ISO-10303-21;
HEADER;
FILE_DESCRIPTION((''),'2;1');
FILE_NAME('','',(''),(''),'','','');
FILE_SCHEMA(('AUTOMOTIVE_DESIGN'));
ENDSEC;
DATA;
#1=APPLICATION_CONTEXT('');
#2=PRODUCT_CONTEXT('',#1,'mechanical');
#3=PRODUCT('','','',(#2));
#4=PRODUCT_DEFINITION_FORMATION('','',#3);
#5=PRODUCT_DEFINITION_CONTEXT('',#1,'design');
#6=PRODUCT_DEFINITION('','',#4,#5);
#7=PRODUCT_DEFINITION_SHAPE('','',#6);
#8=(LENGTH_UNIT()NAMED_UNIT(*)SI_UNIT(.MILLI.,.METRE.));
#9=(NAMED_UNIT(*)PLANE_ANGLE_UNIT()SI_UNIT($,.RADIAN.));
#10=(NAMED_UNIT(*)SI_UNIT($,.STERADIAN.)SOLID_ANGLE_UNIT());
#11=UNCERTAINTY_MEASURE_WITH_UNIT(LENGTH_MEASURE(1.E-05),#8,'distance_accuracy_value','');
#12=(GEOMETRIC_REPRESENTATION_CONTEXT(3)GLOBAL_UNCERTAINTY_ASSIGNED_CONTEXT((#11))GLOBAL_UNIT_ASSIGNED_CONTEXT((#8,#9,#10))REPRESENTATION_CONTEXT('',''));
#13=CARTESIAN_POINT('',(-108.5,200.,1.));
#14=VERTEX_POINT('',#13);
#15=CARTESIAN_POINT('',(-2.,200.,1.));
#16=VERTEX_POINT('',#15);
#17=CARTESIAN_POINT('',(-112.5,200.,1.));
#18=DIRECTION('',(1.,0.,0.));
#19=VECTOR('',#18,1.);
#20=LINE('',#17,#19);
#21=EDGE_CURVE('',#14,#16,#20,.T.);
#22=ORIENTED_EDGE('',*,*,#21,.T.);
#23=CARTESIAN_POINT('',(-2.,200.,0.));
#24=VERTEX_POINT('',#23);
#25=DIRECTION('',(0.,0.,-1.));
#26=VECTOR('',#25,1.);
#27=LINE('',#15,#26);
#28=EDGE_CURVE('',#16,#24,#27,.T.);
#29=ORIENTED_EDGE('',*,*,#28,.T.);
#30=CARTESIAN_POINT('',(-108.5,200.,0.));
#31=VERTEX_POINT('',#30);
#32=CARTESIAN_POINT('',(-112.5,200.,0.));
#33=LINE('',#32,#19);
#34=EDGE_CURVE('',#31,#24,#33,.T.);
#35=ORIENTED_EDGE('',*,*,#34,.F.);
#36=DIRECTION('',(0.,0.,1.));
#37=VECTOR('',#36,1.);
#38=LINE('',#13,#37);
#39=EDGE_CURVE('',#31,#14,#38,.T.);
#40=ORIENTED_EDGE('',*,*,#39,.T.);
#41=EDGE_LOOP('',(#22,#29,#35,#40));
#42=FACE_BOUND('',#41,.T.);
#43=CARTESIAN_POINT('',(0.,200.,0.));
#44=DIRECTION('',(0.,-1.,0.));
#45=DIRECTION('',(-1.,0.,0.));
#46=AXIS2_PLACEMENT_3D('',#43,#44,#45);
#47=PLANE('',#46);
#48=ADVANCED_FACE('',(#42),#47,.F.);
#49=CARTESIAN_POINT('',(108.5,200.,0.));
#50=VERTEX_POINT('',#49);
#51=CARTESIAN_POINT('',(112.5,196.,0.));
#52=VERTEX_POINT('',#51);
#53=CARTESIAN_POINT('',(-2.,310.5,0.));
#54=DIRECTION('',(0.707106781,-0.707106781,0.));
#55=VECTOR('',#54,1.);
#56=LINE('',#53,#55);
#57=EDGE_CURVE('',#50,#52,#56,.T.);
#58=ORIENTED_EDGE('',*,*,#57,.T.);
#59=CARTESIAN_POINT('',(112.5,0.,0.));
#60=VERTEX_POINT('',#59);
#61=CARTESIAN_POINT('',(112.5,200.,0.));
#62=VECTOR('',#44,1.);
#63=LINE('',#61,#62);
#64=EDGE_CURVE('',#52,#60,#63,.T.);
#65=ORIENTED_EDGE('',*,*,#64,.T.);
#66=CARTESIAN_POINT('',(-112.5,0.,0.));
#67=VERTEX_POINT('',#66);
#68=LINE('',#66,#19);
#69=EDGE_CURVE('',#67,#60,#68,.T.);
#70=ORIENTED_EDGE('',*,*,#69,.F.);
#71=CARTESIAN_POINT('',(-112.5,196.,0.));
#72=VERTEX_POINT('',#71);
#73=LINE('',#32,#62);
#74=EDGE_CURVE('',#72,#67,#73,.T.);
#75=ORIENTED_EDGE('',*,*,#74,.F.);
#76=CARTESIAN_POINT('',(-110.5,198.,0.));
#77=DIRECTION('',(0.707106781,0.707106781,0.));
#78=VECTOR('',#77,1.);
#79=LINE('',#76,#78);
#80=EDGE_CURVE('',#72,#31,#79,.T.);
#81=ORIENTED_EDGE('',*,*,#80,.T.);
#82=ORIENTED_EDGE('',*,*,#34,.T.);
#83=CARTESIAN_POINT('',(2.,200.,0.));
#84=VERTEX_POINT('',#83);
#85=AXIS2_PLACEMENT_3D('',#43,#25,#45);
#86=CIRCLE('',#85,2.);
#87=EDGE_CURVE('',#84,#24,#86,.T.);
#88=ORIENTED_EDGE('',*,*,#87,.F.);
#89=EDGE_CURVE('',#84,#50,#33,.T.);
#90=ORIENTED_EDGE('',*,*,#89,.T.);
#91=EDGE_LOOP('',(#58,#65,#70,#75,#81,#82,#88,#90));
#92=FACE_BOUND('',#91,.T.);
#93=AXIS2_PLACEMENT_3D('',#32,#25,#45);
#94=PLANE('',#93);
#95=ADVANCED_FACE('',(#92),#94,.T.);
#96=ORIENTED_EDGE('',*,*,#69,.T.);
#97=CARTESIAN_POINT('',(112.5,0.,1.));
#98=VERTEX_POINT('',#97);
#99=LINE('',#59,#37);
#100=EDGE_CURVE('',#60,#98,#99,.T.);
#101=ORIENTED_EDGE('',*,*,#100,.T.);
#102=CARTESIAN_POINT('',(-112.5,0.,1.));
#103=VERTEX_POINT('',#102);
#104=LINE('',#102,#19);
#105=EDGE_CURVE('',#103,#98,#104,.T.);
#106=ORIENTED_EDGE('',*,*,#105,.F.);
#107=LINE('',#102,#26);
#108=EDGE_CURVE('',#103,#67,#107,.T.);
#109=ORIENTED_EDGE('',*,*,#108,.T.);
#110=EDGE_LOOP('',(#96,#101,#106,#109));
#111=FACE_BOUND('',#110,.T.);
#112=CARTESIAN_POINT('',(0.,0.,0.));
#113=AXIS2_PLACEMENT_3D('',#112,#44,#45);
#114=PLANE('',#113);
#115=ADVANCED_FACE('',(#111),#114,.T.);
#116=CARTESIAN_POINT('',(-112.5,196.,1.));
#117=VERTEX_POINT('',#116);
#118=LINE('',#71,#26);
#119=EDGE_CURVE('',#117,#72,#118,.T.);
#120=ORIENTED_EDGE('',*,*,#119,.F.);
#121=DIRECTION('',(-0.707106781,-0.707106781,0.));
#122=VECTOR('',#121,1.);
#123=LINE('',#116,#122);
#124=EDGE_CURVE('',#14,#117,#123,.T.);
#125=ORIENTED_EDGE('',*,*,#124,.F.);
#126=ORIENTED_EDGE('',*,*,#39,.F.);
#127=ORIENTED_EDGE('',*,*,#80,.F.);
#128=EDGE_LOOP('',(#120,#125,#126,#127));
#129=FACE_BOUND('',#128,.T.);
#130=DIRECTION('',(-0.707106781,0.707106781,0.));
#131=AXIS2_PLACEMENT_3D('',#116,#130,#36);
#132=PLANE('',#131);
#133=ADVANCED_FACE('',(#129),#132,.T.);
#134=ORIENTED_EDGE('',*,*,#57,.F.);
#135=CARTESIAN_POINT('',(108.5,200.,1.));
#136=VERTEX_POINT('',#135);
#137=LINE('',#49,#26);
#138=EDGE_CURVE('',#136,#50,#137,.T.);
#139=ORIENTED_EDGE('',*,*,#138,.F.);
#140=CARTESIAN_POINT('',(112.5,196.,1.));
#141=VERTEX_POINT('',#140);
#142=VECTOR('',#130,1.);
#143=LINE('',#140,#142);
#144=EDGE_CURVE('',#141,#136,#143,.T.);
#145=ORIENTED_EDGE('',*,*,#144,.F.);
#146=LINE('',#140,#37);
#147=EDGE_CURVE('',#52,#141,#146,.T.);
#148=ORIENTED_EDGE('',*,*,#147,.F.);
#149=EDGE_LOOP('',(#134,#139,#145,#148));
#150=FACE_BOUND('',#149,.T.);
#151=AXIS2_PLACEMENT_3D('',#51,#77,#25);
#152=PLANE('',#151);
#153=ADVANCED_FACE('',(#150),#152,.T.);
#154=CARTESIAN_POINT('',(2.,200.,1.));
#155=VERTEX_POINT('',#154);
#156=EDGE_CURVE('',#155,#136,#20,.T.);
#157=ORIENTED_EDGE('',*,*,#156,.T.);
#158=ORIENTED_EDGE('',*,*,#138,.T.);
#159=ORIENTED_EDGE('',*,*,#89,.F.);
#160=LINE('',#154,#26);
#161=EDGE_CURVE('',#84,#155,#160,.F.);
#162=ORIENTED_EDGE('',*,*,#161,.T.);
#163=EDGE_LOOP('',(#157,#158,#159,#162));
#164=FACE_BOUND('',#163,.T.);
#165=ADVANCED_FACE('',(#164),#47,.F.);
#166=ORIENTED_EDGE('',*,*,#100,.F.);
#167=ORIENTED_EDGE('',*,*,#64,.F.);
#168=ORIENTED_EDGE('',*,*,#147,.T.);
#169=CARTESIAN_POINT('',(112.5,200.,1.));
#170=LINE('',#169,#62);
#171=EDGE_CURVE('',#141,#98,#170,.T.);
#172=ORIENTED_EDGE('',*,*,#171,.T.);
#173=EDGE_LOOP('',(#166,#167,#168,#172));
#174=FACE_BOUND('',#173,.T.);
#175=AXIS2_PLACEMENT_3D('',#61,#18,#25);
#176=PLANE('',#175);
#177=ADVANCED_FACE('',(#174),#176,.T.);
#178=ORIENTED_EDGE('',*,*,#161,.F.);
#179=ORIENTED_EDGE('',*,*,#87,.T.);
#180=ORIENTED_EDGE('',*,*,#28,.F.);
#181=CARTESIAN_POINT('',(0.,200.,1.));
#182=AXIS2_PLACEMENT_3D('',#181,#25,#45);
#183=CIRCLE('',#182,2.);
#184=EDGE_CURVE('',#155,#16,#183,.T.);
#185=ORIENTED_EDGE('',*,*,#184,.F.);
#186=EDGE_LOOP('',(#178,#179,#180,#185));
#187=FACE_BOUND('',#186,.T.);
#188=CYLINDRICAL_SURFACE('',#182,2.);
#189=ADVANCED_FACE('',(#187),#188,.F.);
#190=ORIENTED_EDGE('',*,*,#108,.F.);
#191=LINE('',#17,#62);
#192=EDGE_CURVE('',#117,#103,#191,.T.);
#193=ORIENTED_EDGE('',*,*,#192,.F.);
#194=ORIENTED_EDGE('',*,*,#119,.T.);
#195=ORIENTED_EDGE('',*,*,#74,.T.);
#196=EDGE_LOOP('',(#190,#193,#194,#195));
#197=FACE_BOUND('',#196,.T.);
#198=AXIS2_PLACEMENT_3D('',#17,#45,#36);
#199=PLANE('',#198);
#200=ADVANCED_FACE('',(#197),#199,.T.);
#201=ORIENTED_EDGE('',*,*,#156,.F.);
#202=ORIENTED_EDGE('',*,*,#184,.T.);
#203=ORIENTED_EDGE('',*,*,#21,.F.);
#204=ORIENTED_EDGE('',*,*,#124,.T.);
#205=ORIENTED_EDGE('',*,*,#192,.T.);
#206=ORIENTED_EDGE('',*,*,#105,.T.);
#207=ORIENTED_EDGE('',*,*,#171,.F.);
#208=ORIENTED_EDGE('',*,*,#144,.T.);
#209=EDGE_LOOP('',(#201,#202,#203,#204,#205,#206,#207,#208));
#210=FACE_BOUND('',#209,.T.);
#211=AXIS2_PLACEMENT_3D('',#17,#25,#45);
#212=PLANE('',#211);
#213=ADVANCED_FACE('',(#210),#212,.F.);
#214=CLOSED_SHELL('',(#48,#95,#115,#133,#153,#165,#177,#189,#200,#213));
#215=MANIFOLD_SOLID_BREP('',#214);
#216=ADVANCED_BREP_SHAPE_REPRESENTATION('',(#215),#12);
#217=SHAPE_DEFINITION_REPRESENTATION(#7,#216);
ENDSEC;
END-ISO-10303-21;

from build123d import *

# Parameters (mm, degrees)
SKETCH1_W          = 225
SKETCH1_H          = 1
BASE_FLANGE1_DEPTH = 200
CHAMFER1_SIZE      = 4
SKETCH2_R          = 2
CUT_EXTRUDE1_DEPTH = 230.471675812


# Sheet-metal steps are written as plain solids
with BuildPart() as part:
    # Sketch1 → Base-Flange1 (new body)
    with BuildSketch(Plane(origin=(0, 0, 0), x_dir=(1, 0, 0), z_dir=(0, 1, 0))):
        with Locations((0, -0.5)):
            Rectangle(SKETCH1_W, SKETCH1_H)
    extrude(amount=BASE_FLANGE1_DEPTH)

    # Chamfer1
    chamfer1_edges = [part.edges().sort_by_distance(p)[0] for p in [
        (-112.5, 200, 0.5),
        (112.5, 200, 0.5),
    ]]
    chamfer(chamfer1_edges, length=CHAMFER1_SIZE)

    # Sketch2 → Cut-Extrude1 (cut, through all)
    with BuildSketch(Plane(origin=(0, 0, 0), x_dir=(-1, 0, 0), z_dir=(0, 0, -1))):
        with Locations((0, 200)):
            Circle(SKETCH2_R)
    extrude(amount=-CUT_EXTRUDE1_DEPTH, mode=Mode.SUBTRACT)


solid = part.part
